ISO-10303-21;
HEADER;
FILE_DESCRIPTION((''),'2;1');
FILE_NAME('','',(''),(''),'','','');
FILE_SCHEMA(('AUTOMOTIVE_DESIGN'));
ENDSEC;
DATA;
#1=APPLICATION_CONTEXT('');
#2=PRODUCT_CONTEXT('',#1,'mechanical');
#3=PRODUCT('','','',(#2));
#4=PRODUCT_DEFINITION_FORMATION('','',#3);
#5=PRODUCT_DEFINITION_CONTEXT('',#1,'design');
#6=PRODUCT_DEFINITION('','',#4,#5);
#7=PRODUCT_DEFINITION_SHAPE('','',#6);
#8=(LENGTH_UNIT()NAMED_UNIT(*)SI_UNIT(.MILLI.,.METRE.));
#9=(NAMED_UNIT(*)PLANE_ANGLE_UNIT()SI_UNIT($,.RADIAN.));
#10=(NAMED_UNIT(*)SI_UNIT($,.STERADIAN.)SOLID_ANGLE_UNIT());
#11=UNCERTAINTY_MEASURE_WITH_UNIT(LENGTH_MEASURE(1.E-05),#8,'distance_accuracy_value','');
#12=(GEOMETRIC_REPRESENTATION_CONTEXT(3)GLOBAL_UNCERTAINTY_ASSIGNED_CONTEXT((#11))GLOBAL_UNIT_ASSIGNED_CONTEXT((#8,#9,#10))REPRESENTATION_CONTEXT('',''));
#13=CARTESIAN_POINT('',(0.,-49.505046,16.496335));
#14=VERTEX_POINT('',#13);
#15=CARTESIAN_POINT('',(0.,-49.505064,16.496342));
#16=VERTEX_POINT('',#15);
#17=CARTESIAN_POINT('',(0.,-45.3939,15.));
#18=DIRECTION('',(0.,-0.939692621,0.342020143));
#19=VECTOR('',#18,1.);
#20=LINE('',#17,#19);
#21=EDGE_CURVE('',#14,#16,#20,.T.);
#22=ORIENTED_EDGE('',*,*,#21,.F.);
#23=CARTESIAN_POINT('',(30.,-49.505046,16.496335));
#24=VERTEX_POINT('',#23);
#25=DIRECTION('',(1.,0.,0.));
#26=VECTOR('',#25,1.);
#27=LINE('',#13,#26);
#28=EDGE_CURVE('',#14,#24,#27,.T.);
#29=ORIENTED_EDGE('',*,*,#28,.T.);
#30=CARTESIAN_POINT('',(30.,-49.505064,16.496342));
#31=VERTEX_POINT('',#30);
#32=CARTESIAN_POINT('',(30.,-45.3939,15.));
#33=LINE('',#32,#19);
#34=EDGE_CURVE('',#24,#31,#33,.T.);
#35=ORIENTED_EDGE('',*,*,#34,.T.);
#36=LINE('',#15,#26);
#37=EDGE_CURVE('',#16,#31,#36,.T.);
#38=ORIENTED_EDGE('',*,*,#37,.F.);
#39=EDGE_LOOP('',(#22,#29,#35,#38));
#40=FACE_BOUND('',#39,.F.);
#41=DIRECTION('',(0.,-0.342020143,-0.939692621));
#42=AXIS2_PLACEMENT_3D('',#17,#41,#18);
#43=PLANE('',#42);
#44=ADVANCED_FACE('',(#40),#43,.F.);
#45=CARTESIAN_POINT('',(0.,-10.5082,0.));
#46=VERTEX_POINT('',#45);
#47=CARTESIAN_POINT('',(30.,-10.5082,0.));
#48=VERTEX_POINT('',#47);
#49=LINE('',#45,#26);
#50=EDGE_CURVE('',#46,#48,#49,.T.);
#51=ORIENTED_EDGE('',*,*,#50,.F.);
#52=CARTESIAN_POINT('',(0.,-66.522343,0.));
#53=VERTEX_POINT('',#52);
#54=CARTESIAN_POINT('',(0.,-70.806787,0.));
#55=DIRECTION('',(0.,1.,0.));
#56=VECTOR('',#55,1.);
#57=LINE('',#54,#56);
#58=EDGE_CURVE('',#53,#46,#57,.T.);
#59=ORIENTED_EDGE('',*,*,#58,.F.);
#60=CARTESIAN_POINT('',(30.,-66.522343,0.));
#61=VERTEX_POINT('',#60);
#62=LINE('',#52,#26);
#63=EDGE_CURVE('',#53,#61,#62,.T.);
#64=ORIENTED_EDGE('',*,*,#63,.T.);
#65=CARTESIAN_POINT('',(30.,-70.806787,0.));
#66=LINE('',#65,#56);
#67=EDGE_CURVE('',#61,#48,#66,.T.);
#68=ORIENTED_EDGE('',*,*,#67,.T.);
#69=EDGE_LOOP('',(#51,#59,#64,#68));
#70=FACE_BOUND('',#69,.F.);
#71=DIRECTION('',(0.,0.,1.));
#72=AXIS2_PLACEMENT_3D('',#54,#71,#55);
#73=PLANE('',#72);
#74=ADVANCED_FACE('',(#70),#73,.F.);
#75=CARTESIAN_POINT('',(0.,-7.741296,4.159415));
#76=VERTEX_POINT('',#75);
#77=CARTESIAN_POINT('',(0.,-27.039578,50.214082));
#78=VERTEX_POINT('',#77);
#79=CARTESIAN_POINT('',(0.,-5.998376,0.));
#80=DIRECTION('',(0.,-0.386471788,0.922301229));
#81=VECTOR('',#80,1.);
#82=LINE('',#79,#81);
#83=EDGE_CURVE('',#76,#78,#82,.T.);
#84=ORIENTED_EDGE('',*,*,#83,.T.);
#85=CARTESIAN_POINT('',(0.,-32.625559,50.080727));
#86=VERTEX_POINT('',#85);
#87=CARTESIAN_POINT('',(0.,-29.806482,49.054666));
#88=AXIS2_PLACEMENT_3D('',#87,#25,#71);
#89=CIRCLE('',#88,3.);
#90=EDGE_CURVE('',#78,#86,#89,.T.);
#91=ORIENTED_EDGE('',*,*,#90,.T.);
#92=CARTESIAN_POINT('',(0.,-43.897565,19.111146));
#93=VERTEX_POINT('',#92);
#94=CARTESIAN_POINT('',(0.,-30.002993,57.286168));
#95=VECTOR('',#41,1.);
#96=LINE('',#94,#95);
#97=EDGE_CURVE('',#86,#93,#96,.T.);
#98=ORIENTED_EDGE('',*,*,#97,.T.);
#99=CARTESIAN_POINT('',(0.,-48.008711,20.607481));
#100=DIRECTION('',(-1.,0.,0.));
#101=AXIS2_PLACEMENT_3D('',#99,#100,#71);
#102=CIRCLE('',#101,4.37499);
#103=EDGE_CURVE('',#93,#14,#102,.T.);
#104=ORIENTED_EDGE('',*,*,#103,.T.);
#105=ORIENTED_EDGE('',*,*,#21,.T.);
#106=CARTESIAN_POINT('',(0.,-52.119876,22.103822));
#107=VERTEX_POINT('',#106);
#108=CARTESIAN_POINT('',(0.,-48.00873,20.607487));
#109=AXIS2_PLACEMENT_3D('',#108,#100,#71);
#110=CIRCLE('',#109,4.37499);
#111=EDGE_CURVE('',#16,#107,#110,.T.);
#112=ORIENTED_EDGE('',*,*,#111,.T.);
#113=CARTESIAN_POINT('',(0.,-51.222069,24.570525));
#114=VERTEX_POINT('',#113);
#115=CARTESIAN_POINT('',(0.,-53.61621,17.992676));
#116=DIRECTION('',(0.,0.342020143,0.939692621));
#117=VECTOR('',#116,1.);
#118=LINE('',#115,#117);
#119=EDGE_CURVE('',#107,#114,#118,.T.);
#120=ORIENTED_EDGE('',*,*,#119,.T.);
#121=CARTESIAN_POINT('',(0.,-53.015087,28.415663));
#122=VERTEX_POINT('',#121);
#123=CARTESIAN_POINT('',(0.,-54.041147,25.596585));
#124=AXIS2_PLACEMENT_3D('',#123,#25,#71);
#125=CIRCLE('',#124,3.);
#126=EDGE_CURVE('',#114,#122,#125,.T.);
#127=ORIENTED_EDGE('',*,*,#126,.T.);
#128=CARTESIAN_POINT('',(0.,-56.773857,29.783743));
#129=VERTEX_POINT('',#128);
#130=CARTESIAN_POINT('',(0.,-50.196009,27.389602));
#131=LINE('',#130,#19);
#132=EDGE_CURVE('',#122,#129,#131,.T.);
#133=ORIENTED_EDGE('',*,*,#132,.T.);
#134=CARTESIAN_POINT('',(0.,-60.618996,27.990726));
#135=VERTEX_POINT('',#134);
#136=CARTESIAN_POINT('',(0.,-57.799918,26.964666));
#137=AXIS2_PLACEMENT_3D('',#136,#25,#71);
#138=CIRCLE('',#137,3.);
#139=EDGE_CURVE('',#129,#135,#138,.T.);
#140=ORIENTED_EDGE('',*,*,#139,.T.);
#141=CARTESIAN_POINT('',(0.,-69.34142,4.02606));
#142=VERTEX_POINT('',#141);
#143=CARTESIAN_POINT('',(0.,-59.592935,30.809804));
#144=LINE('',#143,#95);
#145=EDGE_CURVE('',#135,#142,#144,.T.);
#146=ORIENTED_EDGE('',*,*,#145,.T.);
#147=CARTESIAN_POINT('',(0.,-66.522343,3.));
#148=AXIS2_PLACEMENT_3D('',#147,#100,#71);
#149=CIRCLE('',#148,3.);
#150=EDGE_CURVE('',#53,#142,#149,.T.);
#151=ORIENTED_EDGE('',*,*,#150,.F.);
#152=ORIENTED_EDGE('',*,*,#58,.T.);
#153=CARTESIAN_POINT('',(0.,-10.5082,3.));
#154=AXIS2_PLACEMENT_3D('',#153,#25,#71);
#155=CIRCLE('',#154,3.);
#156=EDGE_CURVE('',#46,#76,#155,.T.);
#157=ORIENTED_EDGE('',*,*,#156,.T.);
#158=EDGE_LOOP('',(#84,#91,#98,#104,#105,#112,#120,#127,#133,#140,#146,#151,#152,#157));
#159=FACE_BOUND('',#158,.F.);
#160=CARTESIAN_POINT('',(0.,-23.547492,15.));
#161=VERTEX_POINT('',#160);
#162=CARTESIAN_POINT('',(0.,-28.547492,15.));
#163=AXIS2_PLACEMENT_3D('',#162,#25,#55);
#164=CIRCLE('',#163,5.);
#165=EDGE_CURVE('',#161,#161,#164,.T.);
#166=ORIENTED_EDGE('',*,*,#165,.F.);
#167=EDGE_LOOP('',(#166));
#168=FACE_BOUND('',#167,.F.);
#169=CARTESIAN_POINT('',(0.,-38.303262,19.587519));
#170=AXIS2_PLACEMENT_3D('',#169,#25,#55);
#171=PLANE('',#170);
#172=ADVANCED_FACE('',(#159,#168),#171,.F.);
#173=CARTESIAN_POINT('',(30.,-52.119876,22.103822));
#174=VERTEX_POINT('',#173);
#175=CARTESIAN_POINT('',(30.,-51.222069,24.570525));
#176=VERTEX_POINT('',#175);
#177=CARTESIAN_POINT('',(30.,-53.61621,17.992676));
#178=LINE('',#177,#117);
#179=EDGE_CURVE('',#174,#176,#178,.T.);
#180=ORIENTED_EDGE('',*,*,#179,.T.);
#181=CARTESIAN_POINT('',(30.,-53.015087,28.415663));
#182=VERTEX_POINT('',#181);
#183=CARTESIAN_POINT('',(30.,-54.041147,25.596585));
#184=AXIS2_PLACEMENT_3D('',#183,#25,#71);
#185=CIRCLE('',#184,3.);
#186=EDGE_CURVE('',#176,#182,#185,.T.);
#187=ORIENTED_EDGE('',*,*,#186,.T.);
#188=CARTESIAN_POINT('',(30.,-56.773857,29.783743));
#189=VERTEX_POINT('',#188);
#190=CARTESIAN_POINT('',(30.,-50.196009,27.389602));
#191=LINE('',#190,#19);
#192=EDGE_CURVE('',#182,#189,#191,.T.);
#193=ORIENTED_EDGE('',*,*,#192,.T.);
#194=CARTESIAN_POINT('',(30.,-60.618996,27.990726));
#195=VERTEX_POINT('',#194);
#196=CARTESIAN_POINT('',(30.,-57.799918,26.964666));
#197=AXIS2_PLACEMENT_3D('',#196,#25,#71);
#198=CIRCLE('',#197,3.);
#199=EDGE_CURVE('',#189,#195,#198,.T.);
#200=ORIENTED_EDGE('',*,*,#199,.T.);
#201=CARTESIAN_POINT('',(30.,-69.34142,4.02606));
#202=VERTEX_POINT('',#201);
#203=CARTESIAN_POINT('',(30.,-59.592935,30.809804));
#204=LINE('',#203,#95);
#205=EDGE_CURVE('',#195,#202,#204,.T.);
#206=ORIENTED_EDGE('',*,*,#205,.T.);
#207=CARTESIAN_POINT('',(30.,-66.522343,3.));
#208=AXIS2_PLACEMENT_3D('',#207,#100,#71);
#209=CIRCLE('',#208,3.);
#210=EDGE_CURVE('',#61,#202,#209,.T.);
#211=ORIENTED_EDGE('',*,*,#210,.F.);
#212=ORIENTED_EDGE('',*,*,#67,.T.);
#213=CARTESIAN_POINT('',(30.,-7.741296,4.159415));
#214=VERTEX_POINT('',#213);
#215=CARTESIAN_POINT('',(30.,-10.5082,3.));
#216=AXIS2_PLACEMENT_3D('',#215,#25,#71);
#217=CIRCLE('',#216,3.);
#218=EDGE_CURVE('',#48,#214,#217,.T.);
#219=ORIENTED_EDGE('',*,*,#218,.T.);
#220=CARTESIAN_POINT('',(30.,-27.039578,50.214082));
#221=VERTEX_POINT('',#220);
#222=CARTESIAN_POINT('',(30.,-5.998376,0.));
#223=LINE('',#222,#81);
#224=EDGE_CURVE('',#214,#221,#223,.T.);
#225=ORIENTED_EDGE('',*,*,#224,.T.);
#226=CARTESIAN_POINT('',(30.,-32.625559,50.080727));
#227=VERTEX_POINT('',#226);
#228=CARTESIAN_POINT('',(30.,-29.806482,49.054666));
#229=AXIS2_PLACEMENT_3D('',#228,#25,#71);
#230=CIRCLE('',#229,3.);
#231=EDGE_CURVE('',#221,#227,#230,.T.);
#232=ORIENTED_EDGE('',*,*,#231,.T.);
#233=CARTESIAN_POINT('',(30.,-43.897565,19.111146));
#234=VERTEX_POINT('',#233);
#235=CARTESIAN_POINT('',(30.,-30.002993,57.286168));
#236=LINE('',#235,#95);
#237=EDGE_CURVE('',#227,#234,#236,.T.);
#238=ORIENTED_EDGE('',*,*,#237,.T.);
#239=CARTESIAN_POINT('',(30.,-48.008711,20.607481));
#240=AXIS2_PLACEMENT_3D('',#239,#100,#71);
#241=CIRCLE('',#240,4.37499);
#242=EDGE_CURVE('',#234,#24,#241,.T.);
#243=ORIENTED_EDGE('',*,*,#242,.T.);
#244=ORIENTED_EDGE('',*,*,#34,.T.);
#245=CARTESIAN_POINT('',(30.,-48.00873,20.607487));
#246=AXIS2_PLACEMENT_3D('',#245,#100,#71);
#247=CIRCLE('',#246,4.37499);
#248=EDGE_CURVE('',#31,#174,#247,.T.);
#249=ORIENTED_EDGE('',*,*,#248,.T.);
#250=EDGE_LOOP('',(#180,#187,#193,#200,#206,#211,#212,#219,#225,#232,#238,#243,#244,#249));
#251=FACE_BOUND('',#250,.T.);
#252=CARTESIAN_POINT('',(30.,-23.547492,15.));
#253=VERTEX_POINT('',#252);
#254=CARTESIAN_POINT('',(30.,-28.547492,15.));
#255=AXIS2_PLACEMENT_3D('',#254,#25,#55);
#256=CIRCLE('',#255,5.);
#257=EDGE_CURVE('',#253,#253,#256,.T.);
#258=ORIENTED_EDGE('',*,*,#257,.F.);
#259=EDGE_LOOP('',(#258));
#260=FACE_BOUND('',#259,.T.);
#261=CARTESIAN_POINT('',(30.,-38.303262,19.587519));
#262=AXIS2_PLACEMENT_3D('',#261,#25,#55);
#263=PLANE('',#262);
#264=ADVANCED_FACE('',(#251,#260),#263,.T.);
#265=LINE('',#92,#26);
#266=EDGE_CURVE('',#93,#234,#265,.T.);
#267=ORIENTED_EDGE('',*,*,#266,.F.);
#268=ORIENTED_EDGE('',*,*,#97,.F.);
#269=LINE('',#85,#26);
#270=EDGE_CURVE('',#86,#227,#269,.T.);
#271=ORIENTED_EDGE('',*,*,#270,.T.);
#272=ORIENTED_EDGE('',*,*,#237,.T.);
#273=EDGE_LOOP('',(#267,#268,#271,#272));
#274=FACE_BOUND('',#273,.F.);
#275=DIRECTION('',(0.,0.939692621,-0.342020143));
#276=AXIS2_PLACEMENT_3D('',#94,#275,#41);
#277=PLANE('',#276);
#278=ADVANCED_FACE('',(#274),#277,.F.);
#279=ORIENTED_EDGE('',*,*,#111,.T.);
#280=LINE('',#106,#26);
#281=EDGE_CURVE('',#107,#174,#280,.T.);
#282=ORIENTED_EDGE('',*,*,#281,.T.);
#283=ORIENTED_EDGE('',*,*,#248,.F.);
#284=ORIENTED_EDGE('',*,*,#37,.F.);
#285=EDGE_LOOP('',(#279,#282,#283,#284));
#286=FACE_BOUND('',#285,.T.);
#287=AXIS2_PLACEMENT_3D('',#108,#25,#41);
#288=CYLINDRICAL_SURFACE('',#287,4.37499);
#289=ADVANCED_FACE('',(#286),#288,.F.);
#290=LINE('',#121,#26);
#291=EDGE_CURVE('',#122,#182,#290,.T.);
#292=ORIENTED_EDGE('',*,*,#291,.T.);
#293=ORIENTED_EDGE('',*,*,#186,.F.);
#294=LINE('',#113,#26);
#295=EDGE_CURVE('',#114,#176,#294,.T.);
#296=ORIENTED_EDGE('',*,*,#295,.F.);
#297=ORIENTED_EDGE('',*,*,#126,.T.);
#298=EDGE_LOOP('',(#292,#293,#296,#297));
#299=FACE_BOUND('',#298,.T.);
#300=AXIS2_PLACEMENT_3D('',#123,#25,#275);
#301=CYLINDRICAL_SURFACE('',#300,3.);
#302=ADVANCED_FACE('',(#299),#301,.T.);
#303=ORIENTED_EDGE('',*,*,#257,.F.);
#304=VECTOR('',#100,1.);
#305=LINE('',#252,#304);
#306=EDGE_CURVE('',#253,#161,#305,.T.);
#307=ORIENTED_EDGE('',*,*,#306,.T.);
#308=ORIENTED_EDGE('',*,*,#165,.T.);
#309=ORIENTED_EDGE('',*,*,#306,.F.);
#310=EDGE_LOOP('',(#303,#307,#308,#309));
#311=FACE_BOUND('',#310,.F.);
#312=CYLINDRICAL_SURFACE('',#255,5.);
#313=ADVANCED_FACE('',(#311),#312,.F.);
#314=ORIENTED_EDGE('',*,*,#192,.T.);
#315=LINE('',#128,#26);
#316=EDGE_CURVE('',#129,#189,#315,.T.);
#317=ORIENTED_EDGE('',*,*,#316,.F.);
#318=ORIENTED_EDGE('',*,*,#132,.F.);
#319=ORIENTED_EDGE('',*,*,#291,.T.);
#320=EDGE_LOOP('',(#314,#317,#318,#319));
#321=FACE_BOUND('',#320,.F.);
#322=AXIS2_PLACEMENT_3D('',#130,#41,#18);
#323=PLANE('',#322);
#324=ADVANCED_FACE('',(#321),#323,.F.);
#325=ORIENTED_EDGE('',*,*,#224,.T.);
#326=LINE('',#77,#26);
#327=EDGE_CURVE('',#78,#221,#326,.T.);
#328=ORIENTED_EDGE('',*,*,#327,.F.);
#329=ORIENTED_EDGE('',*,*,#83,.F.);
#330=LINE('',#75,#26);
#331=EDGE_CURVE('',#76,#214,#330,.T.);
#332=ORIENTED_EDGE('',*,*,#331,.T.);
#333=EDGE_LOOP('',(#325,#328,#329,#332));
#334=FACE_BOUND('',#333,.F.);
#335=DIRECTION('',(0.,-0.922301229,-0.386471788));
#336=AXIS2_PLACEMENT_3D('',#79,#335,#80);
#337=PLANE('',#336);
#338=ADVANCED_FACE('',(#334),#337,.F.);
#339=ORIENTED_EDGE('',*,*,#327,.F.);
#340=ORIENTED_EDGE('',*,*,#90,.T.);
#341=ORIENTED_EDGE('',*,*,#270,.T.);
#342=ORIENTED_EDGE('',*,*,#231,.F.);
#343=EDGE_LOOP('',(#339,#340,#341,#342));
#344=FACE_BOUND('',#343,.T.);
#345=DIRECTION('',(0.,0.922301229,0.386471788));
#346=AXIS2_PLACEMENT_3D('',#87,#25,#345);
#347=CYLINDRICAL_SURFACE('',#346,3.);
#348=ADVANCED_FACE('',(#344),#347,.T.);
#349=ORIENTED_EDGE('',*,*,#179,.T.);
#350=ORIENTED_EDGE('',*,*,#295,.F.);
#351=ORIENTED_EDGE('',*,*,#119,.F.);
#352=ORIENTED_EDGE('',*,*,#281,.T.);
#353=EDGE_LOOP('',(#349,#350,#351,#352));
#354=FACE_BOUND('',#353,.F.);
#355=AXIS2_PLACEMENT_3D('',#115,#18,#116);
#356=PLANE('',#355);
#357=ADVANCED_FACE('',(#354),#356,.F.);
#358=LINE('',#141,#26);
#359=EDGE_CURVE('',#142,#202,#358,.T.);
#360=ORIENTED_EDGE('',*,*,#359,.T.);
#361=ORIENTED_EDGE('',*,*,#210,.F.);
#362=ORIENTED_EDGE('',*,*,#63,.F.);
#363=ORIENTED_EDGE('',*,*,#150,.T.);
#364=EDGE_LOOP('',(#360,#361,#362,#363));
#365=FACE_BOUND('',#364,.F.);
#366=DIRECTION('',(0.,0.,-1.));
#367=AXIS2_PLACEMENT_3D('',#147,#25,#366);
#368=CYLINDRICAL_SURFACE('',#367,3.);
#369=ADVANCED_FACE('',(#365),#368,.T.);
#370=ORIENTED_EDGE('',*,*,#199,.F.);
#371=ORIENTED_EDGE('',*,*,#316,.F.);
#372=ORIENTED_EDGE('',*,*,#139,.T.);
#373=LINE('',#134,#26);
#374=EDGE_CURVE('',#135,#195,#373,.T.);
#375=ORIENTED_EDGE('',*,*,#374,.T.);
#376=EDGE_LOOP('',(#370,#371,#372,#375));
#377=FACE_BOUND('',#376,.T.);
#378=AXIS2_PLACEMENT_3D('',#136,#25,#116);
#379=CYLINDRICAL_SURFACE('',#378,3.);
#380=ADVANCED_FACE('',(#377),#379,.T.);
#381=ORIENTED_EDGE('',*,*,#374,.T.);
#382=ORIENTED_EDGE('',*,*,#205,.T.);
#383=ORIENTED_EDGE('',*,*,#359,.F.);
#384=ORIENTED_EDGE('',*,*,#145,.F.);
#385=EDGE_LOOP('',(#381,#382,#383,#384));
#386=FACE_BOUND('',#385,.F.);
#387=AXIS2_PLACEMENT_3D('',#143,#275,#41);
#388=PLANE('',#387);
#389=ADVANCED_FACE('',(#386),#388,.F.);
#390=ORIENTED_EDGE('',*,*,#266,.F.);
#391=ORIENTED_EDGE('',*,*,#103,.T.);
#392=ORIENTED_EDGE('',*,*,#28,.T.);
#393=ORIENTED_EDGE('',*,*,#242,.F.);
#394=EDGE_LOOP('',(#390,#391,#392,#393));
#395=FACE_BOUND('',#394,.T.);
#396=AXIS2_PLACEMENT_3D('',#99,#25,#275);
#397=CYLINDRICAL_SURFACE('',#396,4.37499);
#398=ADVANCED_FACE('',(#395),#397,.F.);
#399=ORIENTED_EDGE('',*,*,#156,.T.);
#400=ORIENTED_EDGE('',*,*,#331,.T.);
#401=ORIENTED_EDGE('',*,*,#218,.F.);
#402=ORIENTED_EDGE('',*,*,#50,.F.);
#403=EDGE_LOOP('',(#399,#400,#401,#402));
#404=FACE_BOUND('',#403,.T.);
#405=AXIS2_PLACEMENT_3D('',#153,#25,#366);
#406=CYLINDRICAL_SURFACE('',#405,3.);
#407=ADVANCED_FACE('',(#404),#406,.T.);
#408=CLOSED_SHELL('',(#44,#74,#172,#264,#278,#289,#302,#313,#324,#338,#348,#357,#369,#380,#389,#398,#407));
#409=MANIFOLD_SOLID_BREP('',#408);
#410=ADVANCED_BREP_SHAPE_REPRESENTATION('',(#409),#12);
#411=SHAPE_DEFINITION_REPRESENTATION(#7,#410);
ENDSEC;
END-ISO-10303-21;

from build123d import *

# Parameters (mm, degrees)
F4_DEPTH = 30
F5_R     = 3
F6_R     = 5
F7_DEPTH = 33.1
F8_R     = 4.37499


# Not quite as in the source:
# - a fillet or chamfer is up to 0.001 mm smaller than in the source, because OpenCascade refuses the exact size


with BuildPart() as f4:
    # F3 (on Right) → F4 (new body)
    with BuildSketch(Plane.YZ):
        Polygon((-70.8067866115, 0), (-5.9983764602, 0), (-30.002993414, 57.2861679354), (-45.3938998636, 15), (-53.6162102955, 17.9926762541), (-50.1960088622, 27.389602462), (-59.5929350701, 30.8098038952), align=None)
    extrude(amount=F4_DEPTH)

    # F5
    f5_edges = [f4.edges().sort_by_distance(p)[0] for p in [
        (15, -50.196009, 27.389602),
        (15, -30.002993, 57.286168),
        (15, -59.592935, 30.809804),
        (15, -70.806787, 0),
        (15, -5.998376, 0),
    ]]
    fillet(f5_edges, radius=F5_R)

    # F6 (on face) → F7 (cut)
    with BuildSketch(Plane.YZ.offset(30)):
        with Locations((-28.5474918187, 15)):
            Circle(F6_R)
    extrude(amount=-F7_DEPTH, mode=Mode.SUBTRACT)

    # F8 (radius 4.375 in the source; OpenCascade refuses exactly that, so slightly less here)
    f8_edges = [f4.edges().sort_by_distance(p)[0] for p in [
        (15, -53.61621, 17.992676),
        (15, -45.3939, 15),
    ]]
    fillet(f8_edges, radius=F8_R)


solid = f4.part
